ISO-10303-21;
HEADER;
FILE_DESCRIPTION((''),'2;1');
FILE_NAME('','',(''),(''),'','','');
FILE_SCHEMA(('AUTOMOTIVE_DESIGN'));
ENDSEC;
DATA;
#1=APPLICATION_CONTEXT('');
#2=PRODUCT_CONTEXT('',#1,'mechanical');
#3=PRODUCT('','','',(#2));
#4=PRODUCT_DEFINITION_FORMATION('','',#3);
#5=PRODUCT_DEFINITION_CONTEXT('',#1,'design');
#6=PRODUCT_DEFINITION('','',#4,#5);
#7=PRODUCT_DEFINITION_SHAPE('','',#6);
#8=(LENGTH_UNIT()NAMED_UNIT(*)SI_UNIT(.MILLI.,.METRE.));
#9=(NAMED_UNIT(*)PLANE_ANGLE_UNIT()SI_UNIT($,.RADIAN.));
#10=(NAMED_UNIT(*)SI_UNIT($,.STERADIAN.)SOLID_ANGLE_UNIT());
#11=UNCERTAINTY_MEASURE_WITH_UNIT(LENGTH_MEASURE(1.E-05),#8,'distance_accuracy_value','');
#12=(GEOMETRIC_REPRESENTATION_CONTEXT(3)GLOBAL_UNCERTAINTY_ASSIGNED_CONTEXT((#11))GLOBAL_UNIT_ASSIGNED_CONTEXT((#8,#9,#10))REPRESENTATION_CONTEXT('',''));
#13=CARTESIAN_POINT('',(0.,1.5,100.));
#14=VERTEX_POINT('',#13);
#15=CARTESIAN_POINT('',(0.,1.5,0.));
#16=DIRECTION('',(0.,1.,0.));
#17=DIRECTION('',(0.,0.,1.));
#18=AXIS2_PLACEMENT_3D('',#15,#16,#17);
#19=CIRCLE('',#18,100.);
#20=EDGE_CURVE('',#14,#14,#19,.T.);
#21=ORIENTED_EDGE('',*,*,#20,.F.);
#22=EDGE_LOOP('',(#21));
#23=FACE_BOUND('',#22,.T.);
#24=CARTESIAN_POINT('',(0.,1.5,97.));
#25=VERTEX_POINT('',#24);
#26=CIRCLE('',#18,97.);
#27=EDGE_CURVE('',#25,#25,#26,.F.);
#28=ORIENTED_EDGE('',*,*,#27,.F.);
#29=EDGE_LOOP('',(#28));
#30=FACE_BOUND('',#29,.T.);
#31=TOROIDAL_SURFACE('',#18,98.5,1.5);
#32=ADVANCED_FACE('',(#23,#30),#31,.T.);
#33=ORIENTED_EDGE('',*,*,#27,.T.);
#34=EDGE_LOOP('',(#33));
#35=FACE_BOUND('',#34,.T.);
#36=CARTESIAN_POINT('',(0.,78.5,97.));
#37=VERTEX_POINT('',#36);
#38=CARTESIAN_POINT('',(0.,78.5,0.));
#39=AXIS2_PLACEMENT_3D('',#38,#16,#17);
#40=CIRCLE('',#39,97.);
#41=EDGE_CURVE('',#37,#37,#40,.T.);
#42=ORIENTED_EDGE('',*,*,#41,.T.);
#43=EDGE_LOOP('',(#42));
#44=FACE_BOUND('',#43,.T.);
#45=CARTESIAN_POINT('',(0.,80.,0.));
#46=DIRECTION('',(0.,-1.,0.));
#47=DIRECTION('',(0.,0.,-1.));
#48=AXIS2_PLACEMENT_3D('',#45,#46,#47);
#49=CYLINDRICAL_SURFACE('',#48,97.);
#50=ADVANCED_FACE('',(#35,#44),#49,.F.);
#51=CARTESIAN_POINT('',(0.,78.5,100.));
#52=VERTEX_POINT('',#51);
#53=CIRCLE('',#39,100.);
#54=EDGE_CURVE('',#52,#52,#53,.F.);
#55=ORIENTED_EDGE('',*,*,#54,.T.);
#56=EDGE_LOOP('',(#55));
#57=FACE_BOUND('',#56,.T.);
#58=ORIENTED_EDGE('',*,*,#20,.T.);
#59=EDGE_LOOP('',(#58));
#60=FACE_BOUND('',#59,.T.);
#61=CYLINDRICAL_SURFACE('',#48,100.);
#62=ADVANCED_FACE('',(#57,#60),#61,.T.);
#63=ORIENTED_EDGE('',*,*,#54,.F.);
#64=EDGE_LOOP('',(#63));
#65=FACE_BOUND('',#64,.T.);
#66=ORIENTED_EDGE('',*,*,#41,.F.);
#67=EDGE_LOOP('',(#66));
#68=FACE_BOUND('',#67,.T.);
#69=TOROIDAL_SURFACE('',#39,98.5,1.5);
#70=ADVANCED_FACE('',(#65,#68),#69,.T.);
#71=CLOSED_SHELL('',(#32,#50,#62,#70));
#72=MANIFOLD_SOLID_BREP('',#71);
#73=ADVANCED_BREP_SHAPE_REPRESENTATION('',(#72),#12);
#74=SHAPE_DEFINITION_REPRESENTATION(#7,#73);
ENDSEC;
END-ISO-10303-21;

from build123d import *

# Parameters (mm, degrees)
SHIELD_CROSS_SECTION_SKETCH_R   = 100
SHIELD_CROSS_SECTION_SKETCH_R_2 = 97
SHIELD_EXTRUDE_DEPTH            = 80
TOP_FILLET_R                    = 1.5
BOTTOM_FILLET_R                 = 1.5


with BuildPart() as part:
    # Shield Cross Section Sketch → Shield Extrude (new body)
    with BuildSketch(Plane(origin=(0, 0, 0), x_dir=(1, 0, 0), z_dir=(0, 1, 0))):
        with Locations(Location((0, 0, 0), (0, 0, 270))):
            Circle(SHIELD_CROSS_SECTION_SKETCH_R)
        with Locations(Location((0, 0, 0), (0, 0, 270))):
            Circle(SHIELD_CROSS_SECTION_SKETCH_R_2, mode=Mode.SUBTRACT)
    extrude(amount=SHIELD_EXTRUDE_DEPTH)

    # Top Fillet
    top_fillet_edges = [part.edges().sort_by_distance(p)[0] for p in [
        (0, 80, -100),
        (0, 80, -97),
    ]]
    fillet(top_fillet_edges, radius=TOP_FILLET_R - 0.0001)  # a hair under: the kernel refuses the full size

    # Bottom Fillet
    bottom_fillet_edges = [part.edges().sort_by_distance(p)[0] for p in [
        (0, 0, -100),
        (0, 0, -97),
    ]]
    fillet(bottom_fillet_edges, radius=BOTTOM_FILLET_R - 0.0001)  # a hair under: the kernel refuses the full size


solid = part.part
